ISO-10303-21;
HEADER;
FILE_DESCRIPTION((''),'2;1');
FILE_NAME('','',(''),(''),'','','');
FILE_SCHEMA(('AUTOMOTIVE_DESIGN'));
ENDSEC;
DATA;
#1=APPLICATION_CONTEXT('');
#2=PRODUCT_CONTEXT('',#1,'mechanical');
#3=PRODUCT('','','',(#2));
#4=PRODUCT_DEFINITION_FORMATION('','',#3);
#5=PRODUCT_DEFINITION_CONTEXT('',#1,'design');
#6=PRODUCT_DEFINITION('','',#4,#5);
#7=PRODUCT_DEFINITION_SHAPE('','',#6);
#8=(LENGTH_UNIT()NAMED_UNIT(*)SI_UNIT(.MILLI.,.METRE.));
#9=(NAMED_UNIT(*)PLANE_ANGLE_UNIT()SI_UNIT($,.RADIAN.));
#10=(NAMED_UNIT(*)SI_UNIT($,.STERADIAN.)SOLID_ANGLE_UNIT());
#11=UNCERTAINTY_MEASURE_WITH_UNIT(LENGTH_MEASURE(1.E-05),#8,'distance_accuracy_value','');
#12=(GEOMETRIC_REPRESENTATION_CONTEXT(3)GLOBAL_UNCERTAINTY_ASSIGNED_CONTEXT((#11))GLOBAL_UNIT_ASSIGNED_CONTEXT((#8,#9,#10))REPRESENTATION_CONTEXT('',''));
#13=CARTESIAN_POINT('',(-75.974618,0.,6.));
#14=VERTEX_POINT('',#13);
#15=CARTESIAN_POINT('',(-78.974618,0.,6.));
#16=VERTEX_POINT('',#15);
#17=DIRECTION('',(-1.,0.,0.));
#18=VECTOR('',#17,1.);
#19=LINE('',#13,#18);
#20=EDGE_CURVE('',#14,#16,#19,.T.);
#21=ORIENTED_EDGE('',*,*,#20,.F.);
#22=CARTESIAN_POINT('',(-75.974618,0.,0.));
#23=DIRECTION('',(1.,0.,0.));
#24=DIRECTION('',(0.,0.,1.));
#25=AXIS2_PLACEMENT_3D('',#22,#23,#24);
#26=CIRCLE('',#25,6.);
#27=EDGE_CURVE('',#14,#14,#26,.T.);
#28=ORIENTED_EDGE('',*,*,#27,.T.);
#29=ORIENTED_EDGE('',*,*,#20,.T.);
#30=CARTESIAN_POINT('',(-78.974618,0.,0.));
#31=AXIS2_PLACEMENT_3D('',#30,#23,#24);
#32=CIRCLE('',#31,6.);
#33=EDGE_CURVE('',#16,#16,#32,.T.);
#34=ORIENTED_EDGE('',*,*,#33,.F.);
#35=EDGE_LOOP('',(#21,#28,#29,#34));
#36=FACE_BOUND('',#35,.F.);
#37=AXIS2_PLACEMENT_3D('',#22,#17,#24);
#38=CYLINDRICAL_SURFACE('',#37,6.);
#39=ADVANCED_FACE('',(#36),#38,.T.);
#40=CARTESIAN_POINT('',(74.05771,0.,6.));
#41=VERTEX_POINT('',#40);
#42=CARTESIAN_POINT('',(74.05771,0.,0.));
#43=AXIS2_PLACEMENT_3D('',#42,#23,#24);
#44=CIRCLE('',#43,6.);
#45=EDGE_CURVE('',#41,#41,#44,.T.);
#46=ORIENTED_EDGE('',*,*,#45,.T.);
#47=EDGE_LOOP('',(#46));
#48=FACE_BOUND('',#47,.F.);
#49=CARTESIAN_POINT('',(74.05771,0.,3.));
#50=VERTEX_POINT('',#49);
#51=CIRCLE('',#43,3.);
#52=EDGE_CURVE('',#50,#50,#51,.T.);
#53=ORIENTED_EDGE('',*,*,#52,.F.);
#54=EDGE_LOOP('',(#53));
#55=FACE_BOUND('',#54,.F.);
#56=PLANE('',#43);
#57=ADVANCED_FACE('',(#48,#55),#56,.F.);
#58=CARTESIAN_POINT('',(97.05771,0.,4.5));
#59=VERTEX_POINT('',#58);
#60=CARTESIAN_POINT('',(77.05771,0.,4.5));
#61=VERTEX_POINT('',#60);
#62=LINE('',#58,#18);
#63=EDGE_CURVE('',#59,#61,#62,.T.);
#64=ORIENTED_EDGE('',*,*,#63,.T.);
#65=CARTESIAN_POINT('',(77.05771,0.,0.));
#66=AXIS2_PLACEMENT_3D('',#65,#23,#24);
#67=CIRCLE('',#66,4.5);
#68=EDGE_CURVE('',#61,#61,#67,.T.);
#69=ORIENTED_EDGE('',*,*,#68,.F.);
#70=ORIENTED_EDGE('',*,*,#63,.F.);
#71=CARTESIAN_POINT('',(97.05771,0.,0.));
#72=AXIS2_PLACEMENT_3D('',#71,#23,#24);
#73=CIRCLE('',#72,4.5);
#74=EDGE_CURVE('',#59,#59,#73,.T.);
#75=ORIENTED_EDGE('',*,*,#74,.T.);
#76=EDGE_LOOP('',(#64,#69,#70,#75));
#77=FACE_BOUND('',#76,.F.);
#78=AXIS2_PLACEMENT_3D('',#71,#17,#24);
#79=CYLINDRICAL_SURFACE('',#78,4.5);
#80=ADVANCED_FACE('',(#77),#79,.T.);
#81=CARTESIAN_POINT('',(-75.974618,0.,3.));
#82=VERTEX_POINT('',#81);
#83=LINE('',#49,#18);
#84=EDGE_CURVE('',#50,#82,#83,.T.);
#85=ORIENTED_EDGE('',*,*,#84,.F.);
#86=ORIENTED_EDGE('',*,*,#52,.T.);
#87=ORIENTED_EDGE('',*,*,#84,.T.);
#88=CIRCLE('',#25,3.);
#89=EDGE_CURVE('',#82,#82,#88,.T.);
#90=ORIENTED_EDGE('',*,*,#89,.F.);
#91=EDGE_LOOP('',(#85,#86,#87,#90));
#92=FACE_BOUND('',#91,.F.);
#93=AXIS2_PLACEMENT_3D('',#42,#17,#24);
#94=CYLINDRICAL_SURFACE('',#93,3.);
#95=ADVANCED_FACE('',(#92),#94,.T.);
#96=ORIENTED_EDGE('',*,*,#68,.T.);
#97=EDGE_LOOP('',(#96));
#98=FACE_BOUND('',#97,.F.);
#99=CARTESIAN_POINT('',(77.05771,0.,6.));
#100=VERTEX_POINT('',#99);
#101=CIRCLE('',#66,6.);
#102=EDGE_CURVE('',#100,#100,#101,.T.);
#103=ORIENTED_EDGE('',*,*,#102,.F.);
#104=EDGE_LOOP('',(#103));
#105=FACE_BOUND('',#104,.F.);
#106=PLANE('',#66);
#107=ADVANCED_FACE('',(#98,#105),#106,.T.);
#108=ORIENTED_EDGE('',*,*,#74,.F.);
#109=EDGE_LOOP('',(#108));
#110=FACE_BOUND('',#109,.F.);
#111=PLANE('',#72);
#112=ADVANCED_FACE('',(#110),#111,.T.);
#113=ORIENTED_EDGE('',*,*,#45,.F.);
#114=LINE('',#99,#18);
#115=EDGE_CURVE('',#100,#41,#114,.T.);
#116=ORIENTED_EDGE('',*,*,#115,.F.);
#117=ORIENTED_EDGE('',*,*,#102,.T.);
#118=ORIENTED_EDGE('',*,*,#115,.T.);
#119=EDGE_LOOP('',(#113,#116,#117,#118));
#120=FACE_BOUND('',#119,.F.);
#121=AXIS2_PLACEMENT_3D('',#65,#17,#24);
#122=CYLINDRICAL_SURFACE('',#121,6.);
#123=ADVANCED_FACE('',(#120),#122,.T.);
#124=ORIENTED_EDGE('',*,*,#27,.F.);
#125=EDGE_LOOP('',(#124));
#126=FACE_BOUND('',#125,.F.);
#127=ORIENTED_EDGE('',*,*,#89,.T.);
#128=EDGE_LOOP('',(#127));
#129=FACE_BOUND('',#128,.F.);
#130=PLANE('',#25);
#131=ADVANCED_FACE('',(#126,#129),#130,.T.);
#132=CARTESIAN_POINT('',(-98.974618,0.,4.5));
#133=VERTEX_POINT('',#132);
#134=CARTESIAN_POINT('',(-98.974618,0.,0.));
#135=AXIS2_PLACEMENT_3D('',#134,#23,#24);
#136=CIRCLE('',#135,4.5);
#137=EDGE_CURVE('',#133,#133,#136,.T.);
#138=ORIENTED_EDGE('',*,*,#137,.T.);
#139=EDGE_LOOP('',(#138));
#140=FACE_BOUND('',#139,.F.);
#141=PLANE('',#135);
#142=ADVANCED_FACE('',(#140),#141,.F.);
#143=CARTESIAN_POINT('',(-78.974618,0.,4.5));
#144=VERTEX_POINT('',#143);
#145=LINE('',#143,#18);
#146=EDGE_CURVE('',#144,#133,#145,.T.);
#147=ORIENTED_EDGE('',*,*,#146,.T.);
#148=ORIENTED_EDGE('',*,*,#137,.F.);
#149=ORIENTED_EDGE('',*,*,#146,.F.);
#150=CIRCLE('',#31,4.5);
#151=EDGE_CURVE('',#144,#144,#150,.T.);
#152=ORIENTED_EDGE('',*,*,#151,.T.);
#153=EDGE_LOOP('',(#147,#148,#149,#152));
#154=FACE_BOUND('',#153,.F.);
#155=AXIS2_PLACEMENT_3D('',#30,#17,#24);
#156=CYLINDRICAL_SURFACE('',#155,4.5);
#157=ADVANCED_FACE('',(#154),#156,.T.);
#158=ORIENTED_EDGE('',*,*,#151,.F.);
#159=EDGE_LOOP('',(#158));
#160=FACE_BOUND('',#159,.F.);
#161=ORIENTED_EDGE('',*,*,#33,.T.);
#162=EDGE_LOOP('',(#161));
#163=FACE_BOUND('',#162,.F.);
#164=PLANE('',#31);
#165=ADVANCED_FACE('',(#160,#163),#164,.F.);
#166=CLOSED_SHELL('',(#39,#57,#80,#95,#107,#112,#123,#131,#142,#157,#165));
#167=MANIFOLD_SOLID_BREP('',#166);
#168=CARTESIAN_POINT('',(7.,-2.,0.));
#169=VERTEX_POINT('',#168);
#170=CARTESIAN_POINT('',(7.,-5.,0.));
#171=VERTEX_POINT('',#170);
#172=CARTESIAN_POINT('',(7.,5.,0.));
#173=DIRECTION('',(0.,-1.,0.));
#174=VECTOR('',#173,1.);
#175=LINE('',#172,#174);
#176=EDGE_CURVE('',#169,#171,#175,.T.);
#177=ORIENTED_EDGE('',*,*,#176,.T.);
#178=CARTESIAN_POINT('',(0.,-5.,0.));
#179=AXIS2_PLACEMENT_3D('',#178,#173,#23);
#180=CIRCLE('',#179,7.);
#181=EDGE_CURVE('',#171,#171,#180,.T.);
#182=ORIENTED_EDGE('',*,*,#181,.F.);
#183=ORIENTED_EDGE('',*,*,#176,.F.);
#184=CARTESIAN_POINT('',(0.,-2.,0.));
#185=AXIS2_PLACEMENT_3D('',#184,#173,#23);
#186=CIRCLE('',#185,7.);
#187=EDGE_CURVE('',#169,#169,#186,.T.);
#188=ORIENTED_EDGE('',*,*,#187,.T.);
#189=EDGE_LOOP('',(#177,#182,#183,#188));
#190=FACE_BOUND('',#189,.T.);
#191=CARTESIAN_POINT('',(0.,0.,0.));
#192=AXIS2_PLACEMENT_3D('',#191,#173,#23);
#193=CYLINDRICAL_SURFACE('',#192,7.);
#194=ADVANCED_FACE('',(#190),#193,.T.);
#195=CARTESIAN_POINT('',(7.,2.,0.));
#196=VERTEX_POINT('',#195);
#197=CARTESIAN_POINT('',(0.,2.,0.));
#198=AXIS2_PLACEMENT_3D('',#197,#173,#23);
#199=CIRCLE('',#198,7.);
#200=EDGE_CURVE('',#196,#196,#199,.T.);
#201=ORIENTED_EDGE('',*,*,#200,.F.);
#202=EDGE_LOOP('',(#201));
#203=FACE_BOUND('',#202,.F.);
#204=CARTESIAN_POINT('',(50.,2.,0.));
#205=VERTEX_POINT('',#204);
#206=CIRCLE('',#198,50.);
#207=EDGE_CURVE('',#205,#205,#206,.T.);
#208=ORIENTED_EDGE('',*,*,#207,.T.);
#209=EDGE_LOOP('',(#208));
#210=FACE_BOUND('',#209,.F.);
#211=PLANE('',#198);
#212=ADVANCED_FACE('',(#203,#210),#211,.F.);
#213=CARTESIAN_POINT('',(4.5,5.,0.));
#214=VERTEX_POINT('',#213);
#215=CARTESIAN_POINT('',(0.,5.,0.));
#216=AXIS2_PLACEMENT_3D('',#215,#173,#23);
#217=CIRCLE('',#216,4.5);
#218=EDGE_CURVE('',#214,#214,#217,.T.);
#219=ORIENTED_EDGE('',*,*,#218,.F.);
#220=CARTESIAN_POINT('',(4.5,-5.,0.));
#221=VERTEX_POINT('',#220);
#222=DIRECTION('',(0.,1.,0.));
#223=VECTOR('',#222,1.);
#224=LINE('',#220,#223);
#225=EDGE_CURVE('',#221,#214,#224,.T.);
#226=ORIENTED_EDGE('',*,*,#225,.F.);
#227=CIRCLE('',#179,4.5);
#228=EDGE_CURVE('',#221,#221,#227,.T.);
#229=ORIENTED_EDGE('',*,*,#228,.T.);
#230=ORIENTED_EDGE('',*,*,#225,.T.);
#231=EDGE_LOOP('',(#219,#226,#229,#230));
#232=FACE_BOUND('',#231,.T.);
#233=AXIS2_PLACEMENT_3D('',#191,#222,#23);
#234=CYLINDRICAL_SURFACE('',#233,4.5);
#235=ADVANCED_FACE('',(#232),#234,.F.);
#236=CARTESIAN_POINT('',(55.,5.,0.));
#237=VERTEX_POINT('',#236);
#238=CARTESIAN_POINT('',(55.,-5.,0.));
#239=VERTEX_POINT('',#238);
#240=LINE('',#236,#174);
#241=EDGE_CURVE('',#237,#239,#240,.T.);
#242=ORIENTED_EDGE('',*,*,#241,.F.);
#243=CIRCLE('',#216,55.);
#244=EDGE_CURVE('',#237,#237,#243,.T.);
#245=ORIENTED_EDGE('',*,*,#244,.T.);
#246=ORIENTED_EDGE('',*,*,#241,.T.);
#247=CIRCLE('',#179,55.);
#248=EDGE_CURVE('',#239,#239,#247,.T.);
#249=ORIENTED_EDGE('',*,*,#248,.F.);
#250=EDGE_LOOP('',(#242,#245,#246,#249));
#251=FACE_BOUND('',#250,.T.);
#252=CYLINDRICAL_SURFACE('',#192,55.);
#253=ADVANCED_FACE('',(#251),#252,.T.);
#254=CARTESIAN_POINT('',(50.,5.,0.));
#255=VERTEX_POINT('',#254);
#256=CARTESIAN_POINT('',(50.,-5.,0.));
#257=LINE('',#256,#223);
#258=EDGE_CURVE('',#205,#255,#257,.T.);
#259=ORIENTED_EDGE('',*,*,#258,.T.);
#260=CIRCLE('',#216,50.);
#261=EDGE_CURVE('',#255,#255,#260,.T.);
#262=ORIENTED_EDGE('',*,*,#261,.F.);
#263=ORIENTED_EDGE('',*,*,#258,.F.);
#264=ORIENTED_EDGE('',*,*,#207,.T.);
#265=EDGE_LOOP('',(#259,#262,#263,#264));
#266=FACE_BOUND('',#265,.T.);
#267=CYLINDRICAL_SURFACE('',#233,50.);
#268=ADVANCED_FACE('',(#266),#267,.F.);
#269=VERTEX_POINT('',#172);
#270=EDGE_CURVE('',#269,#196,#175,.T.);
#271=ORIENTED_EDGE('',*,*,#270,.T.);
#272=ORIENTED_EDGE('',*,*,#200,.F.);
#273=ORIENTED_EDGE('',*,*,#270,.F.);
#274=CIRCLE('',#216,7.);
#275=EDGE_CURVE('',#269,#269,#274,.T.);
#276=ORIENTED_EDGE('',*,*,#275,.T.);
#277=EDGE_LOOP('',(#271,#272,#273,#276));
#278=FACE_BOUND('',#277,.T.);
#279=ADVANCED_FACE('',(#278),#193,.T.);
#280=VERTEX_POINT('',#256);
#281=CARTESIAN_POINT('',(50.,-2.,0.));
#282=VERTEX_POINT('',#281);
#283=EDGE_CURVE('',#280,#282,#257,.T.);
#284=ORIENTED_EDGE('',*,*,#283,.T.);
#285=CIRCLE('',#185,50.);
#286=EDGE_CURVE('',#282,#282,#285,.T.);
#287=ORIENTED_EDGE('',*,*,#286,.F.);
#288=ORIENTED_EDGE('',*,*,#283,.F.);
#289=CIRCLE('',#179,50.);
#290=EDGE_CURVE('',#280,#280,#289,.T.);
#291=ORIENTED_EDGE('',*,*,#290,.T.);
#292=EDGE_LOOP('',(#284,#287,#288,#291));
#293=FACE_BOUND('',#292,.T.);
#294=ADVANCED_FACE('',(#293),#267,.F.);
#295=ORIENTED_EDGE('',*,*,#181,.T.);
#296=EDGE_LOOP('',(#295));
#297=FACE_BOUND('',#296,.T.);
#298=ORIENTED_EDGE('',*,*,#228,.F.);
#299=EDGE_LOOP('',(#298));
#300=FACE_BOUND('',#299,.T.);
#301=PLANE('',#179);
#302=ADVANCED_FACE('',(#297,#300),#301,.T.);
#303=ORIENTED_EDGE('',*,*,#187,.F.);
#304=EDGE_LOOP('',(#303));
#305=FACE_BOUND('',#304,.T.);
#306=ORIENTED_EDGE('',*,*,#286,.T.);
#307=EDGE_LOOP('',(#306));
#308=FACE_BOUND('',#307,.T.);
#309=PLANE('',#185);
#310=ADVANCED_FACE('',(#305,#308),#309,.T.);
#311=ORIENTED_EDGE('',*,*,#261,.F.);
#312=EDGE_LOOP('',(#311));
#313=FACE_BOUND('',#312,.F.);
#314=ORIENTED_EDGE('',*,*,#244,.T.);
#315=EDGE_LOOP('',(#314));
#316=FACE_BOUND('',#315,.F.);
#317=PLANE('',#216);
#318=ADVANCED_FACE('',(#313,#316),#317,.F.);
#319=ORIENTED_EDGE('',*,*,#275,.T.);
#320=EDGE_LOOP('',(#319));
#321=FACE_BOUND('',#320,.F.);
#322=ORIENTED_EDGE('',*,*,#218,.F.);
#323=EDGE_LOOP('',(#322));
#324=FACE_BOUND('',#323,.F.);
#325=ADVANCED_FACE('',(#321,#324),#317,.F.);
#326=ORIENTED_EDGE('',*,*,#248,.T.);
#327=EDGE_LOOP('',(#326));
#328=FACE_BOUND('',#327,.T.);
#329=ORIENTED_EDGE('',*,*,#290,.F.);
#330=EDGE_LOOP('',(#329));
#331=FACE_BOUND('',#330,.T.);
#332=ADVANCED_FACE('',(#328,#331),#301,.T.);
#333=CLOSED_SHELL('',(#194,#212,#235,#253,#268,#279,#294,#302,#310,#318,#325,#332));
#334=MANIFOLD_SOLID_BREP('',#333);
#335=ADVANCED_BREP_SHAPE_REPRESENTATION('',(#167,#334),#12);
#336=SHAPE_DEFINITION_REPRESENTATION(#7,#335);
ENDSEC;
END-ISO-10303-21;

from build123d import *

# Parameters (mm, degrees)
F0_R     = 50
F0_R_2   = 7
F1_DEPTH = 2
F0_R_3   = 55
F2_DEPTH = 5
F0_R_4   = 4.5
F5_DEPTH = 5


with BuildPart() as f1:
    # F0 (on Front) → F1 (new body, symmetric)
    with BuildSketch(Plane.XZ):
        Circle(F0_R)
        Circle(F0_R_2, mode=Mode.SUBTRACT)
    extrude(amount=F1_DEPTH, both=True)

    # F0 (on Front) → F2 (join, symmetric)
    with BuildSketch(Plane.XZ):
        Circle(F0_R_3)
        Circle(F0_R, mode=Mode.SUBTRACT)
    extrude(amount=F2_DEPTH, both=True)

    # F0 (on Front) → F5 (join, symmetric)
    with BuildSketch(Plane.XZ):
        Circle(F0_R_2)
        Circle(F0_R_4, mode=Mode.SUBTRACT)
    extrude(amount=F5_DEPTH, both=True)


with BuildPart() as f4:
    # F3 (on Front) → F4 (revolve)
    with BuildSketch(Plane.XZ):
        Polygon((-98.9746183659, 0), (97.0577100897, 0), (97.0577100897, 4.5), (77.0577100897, 4.5), (77.0577100897, 6), (74.0577100897, 6), (74.0577100897, 3), (-75.9746183659, 3), (-75.9746183659, 6), (-78.9746183659, 6), (-78.9746183659, 4.5), (-98.9746183659, 4.5), align=None)
    revolve(axis=Axis((-0.9584541381, 0, 0), (1, 0, 0)))


solid = Compound([f1.part, f4.part])
